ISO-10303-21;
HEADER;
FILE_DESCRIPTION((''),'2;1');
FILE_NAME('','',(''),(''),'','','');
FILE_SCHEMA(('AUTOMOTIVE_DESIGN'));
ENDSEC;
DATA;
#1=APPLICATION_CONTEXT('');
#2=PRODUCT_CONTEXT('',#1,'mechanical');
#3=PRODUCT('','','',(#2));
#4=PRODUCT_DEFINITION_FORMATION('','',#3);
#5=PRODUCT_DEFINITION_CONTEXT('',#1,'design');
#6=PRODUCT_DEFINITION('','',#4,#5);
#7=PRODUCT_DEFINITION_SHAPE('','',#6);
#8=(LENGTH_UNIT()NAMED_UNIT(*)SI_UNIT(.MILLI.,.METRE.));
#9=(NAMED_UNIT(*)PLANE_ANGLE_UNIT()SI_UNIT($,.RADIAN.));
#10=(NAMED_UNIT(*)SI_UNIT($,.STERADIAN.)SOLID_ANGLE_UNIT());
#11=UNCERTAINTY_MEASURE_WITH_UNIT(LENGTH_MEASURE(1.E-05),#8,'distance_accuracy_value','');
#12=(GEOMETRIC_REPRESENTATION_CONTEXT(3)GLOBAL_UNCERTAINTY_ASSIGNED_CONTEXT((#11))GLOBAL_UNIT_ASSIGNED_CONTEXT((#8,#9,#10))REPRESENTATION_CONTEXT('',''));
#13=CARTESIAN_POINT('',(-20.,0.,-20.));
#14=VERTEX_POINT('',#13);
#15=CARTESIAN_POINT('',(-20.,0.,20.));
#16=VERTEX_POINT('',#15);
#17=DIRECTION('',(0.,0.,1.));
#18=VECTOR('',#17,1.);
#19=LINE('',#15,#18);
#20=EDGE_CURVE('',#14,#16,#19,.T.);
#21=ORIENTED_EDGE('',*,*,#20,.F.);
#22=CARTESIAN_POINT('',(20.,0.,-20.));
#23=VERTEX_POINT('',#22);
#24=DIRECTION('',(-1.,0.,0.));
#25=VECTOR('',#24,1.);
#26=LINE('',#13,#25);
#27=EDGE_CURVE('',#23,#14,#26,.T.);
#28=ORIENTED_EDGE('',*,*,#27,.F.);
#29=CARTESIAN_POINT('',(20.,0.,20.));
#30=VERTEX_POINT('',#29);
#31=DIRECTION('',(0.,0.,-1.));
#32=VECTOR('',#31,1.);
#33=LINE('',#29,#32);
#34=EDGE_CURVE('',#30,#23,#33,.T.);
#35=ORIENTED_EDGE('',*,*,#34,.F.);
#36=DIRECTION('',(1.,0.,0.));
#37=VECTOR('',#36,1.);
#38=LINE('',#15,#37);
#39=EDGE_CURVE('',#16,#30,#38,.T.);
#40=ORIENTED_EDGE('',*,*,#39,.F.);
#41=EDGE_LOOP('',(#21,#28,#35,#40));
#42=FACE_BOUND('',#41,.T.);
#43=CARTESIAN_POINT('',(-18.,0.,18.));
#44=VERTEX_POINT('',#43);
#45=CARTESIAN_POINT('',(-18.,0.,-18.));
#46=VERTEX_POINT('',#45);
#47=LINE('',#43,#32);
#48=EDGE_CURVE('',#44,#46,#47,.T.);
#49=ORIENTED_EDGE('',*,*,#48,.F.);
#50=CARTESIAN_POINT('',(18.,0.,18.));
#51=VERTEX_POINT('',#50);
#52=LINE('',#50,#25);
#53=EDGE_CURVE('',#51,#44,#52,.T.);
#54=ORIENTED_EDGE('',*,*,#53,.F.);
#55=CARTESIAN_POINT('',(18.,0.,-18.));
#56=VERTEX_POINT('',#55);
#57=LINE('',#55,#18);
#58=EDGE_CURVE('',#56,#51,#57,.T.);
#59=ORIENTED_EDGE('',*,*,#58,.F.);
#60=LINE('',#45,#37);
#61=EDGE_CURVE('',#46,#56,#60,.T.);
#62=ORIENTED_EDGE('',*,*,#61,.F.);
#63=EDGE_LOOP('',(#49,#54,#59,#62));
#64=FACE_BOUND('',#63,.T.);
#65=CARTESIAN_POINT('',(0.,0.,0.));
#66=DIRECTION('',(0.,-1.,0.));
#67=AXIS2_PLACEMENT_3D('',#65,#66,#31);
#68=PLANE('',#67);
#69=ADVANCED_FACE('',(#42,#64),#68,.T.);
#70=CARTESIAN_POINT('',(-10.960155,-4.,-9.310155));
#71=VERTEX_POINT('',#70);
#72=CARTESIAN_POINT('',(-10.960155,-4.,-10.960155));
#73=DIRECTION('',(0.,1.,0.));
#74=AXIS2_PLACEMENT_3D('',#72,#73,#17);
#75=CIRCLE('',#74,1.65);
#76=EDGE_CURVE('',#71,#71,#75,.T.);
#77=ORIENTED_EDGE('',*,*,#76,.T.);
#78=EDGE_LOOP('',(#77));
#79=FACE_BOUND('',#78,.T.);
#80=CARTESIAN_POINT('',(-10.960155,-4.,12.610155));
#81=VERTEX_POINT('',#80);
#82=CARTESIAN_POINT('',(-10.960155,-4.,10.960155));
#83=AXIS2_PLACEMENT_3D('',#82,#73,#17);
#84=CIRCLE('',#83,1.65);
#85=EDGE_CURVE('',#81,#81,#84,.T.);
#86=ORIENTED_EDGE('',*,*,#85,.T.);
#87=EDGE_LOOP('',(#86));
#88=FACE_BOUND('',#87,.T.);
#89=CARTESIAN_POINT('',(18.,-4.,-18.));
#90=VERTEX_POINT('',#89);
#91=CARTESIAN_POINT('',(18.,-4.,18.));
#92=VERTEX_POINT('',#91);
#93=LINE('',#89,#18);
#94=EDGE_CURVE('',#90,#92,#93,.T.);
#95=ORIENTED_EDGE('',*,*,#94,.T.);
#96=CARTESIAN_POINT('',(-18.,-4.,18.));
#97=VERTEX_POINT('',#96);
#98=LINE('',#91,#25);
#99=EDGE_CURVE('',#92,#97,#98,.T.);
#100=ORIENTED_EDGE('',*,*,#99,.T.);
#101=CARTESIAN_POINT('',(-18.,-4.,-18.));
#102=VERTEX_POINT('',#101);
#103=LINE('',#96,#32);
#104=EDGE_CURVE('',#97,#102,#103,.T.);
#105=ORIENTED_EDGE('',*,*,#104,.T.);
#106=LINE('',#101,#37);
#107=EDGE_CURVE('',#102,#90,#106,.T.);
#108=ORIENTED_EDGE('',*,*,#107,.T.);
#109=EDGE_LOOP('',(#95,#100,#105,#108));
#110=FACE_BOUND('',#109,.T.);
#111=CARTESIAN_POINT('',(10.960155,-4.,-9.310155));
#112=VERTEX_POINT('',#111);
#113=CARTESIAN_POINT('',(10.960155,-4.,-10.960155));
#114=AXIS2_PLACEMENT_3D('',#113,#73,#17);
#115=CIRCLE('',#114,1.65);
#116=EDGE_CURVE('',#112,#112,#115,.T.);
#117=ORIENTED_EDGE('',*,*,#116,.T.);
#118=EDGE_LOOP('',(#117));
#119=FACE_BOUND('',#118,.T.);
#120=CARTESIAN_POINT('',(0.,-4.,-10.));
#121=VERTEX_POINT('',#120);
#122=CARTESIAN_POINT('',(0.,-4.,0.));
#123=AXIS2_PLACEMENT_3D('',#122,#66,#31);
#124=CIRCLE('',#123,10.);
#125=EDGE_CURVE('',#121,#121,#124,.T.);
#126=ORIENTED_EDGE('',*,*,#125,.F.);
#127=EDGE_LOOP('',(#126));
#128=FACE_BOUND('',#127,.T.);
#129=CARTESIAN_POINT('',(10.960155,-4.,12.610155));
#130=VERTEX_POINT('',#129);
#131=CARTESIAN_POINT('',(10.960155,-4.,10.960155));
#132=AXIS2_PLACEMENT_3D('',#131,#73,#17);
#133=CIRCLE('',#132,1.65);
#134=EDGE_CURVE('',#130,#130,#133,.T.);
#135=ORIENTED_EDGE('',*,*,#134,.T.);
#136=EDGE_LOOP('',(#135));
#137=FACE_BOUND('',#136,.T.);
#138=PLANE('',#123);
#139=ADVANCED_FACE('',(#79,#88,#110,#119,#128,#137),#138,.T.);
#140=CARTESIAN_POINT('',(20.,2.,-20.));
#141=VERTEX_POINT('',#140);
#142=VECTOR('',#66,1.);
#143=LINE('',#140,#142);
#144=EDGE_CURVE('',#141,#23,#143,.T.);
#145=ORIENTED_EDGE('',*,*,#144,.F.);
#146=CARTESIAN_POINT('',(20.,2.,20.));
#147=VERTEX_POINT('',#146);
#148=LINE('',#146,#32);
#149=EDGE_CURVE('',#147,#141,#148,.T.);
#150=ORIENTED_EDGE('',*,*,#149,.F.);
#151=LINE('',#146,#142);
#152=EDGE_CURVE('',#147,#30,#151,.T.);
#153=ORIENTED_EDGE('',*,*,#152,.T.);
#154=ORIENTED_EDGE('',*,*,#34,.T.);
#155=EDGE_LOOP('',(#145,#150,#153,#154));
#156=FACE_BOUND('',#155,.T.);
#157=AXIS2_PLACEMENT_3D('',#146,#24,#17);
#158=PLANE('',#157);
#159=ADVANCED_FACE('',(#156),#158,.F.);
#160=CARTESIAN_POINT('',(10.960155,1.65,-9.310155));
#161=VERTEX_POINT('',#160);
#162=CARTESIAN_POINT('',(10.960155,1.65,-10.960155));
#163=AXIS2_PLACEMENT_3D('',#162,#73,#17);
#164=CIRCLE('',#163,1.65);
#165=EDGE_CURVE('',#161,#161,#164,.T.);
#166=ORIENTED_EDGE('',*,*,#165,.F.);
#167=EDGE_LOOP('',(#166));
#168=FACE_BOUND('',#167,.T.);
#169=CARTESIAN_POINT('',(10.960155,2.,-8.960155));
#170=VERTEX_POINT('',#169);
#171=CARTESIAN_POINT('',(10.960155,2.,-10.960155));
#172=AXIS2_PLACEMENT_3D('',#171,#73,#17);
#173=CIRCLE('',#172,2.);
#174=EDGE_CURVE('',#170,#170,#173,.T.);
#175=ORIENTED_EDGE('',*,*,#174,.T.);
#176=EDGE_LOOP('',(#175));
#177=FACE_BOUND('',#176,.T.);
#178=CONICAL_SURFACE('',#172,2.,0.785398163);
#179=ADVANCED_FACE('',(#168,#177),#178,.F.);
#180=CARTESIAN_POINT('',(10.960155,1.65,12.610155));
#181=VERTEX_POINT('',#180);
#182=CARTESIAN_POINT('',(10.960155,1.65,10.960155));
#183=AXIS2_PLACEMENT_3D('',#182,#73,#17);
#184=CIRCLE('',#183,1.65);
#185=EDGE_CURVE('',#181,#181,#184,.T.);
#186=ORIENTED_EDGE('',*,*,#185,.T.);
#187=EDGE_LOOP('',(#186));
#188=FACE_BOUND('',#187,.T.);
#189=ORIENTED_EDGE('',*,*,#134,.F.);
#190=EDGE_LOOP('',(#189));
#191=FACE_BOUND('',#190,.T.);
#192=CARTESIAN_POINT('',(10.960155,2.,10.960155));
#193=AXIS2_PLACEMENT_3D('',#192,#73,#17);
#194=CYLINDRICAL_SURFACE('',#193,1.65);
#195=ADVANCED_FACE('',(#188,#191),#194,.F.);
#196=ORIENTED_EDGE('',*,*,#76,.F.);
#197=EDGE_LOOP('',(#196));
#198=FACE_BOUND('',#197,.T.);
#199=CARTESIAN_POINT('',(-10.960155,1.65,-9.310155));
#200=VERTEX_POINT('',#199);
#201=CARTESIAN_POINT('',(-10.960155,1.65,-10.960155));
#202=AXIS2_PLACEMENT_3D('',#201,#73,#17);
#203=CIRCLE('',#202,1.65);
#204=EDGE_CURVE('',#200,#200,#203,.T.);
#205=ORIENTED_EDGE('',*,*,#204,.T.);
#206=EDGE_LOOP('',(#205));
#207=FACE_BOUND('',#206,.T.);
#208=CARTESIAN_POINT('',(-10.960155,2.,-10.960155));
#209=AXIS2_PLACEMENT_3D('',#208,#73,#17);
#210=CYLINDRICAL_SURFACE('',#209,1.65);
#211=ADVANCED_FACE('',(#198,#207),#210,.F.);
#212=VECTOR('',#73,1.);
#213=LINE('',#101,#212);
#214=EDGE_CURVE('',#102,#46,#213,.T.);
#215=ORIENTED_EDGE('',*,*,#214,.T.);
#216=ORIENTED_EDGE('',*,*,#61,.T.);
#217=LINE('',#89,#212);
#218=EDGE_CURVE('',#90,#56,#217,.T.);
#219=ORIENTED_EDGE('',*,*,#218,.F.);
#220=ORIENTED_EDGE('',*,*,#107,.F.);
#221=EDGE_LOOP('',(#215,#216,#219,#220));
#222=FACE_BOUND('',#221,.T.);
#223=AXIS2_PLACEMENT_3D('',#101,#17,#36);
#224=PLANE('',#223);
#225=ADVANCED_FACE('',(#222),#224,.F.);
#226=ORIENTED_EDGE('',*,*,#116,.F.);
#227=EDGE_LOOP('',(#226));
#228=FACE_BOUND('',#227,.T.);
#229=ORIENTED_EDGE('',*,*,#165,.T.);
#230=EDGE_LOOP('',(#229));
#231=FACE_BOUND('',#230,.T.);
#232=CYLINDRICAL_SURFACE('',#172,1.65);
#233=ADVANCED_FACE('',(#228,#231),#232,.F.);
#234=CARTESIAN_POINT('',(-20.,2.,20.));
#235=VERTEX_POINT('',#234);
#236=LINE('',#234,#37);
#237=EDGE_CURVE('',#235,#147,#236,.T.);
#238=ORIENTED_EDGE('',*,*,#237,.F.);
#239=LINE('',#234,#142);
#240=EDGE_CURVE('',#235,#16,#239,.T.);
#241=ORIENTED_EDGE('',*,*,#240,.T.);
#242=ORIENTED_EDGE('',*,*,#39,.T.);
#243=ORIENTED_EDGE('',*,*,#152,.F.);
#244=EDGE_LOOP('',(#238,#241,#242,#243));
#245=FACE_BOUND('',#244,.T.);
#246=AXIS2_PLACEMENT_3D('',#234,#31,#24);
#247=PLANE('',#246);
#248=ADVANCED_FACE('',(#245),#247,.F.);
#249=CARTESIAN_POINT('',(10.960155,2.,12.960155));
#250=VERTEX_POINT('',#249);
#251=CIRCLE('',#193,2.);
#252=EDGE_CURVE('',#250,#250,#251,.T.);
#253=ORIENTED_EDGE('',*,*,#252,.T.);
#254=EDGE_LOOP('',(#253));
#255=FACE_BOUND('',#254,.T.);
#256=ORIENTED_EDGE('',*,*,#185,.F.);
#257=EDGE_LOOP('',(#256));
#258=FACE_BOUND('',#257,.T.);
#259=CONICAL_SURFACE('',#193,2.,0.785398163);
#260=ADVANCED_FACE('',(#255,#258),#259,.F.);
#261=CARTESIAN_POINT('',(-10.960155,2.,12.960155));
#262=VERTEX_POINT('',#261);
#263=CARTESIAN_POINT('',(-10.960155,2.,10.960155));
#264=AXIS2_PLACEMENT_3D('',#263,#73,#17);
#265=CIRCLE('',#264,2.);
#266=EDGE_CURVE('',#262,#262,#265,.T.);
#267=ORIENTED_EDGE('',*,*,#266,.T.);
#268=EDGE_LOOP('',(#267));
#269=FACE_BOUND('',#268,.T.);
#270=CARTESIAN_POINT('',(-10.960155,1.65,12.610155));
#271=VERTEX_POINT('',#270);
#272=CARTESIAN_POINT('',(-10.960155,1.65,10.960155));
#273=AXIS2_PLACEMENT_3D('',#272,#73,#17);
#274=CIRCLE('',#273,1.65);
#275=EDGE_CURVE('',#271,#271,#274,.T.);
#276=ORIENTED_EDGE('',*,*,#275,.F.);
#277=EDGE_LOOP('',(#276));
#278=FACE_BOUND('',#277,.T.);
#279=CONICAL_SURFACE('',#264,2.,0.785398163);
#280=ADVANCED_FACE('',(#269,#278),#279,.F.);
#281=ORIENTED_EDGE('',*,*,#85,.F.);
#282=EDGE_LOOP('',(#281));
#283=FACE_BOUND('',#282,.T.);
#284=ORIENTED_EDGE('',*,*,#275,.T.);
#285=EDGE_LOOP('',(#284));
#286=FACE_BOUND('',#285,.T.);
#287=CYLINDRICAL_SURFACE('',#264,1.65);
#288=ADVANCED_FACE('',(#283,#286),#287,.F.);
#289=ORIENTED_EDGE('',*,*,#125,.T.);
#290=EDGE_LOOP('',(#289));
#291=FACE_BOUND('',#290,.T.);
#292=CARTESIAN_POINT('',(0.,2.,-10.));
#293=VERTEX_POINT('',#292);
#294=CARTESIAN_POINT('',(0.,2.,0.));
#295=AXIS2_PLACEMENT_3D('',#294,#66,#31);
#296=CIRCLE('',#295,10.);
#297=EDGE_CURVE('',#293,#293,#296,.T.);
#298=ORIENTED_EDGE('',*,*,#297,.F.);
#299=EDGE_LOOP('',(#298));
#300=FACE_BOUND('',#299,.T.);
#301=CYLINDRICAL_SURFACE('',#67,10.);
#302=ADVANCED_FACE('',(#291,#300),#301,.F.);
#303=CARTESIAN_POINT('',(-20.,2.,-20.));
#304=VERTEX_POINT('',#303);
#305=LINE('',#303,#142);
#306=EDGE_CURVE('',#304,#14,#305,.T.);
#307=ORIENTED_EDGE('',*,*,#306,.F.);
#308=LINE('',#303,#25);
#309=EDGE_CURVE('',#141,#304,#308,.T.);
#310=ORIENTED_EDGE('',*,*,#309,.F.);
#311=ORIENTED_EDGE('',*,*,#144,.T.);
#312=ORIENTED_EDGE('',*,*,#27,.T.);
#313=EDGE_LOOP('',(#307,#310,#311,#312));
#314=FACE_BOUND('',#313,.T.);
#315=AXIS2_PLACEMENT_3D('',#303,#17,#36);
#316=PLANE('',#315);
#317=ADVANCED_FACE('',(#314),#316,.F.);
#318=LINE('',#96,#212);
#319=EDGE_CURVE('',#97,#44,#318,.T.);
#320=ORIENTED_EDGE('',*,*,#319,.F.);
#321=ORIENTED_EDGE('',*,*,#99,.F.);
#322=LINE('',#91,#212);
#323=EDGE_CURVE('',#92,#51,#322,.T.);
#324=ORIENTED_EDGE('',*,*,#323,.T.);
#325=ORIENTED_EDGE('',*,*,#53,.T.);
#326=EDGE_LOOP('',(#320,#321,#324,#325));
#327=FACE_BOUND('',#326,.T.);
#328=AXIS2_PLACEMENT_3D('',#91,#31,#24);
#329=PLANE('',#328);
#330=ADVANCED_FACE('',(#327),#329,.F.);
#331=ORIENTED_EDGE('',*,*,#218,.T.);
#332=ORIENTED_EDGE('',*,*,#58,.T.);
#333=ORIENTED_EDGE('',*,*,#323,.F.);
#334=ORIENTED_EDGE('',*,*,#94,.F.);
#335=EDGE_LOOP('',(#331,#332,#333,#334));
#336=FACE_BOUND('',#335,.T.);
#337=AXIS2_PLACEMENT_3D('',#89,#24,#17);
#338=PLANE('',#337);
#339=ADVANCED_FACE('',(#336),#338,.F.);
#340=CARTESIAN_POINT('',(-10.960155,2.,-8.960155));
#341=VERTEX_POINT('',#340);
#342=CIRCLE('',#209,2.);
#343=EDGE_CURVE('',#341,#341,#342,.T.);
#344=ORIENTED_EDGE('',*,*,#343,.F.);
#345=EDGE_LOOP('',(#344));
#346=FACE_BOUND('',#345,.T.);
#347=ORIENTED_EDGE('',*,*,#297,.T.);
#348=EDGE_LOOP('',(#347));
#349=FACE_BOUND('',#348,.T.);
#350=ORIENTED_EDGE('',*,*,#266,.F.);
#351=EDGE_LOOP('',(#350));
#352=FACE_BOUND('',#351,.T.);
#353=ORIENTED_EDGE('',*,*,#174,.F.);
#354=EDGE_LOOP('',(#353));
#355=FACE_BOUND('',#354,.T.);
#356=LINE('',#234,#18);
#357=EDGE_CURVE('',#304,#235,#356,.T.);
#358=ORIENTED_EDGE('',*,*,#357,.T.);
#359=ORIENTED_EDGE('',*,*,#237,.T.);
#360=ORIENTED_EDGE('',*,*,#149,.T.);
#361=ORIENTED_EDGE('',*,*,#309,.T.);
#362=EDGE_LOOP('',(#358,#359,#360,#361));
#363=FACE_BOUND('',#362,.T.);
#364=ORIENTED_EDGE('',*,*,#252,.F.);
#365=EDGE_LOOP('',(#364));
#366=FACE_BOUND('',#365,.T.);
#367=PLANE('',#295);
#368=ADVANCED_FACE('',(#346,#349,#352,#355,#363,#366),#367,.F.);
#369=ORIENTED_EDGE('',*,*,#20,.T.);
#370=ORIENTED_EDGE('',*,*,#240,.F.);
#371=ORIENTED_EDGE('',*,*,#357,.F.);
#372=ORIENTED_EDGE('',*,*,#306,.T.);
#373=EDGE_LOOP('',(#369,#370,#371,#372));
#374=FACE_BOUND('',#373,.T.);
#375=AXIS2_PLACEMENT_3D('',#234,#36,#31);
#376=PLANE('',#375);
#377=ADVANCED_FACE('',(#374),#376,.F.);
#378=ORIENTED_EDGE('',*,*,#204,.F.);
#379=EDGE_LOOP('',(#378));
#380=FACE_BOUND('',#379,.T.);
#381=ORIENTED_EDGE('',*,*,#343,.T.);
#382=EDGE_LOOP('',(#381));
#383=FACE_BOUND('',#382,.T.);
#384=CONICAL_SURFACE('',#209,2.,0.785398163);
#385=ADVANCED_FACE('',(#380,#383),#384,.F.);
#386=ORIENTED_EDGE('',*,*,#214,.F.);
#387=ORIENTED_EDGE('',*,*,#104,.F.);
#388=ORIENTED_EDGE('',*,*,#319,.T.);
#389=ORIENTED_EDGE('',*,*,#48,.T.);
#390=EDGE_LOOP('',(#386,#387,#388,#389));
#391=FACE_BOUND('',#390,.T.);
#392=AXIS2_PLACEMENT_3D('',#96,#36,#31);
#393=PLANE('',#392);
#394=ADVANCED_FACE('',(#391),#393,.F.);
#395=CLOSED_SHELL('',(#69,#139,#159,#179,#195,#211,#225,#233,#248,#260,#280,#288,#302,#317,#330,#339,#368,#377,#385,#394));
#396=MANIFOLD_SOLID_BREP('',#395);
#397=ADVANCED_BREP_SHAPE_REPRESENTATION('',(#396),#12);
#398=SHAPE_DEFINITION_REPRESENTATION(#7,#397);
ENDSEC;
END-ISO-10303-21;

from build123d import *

# Parameters (mm, degrees)
SKETCH1_W                         = 40
SKETCH1_H                         = 40
BOSS_EXTRUDE1_DEPTH               = 2
F_25_0MM_DOWEL_HOLE1_D            = 20
SKETCH9_W                         = 36
SKETCH9_H                         = 36
SKETCH9_R                         = 10
BOSS_EXTRUDE2_DEPTH               = 4
TAP_DRILL_FOR_M4_TAP2_D           = 3.3
TAP_DRILL_FOR_M4_TAP2_CSINK_D     = 4
TAP_DRILL_FOR_M4_TAP2_CSINK_ANGLE = 90


with BuildPart() as part:
    # Sketch1 → Boss-Extrude1 (new body)
    with BuildSketch(Plane(origin=(0, 0, 0), x_dir=(1, 0, 0), z_dir=(0, 1, 0))):
        Rectangle(SKETCH1_W, SKETCH1_H)
    extrude(amount=BOSS_EXTRUDE1_DEPTH)

    # Ø25.0mm Dowel Hole1 (through all)
    with Locations(Plane(origin=(0, 0, 0), x_dir=(-1, 0, 0), z_dir=(0, -1, 0))):
        with Locations((0, 0)):
            Hole(F_25_0MM_DOWEL_HOLE1_D / 2)

    # Sketch9 → Boss-Extrude2 (add)
    with BuildSketch(Plane.XZ):
        Rectangle(SKETCH9_W, SKETCH9_H)
        Circle(SKETCH9_R, mode=Mode.SUBTRACT)
    extrude(amount=BOSS_EXTRUDE2_DEPTH)

    # Tap Drill for M4 Tap2 (through all)
    with Locations(Plane(origin=(0, 2, 0), x_dir=(1, 0, 0), z_dir=(0, 1, 0))):
        with Locations((-10.960155108, 10.960155108), (10.960155108, 10.960155108), (10.960155108, -10.960155108), (-10.960155108, -10.960155108)):
            CounterSinkHole(TAP_DRILL_FOR_M4_TAP2_D / 2, TAP_DRILL_FOR_M4_TAP2_CSINK_D / 2, counter_sink_angle=TAP_DRILL_FOR_M4_TAP2_CSINK_ANGLE)


solid = part.part
